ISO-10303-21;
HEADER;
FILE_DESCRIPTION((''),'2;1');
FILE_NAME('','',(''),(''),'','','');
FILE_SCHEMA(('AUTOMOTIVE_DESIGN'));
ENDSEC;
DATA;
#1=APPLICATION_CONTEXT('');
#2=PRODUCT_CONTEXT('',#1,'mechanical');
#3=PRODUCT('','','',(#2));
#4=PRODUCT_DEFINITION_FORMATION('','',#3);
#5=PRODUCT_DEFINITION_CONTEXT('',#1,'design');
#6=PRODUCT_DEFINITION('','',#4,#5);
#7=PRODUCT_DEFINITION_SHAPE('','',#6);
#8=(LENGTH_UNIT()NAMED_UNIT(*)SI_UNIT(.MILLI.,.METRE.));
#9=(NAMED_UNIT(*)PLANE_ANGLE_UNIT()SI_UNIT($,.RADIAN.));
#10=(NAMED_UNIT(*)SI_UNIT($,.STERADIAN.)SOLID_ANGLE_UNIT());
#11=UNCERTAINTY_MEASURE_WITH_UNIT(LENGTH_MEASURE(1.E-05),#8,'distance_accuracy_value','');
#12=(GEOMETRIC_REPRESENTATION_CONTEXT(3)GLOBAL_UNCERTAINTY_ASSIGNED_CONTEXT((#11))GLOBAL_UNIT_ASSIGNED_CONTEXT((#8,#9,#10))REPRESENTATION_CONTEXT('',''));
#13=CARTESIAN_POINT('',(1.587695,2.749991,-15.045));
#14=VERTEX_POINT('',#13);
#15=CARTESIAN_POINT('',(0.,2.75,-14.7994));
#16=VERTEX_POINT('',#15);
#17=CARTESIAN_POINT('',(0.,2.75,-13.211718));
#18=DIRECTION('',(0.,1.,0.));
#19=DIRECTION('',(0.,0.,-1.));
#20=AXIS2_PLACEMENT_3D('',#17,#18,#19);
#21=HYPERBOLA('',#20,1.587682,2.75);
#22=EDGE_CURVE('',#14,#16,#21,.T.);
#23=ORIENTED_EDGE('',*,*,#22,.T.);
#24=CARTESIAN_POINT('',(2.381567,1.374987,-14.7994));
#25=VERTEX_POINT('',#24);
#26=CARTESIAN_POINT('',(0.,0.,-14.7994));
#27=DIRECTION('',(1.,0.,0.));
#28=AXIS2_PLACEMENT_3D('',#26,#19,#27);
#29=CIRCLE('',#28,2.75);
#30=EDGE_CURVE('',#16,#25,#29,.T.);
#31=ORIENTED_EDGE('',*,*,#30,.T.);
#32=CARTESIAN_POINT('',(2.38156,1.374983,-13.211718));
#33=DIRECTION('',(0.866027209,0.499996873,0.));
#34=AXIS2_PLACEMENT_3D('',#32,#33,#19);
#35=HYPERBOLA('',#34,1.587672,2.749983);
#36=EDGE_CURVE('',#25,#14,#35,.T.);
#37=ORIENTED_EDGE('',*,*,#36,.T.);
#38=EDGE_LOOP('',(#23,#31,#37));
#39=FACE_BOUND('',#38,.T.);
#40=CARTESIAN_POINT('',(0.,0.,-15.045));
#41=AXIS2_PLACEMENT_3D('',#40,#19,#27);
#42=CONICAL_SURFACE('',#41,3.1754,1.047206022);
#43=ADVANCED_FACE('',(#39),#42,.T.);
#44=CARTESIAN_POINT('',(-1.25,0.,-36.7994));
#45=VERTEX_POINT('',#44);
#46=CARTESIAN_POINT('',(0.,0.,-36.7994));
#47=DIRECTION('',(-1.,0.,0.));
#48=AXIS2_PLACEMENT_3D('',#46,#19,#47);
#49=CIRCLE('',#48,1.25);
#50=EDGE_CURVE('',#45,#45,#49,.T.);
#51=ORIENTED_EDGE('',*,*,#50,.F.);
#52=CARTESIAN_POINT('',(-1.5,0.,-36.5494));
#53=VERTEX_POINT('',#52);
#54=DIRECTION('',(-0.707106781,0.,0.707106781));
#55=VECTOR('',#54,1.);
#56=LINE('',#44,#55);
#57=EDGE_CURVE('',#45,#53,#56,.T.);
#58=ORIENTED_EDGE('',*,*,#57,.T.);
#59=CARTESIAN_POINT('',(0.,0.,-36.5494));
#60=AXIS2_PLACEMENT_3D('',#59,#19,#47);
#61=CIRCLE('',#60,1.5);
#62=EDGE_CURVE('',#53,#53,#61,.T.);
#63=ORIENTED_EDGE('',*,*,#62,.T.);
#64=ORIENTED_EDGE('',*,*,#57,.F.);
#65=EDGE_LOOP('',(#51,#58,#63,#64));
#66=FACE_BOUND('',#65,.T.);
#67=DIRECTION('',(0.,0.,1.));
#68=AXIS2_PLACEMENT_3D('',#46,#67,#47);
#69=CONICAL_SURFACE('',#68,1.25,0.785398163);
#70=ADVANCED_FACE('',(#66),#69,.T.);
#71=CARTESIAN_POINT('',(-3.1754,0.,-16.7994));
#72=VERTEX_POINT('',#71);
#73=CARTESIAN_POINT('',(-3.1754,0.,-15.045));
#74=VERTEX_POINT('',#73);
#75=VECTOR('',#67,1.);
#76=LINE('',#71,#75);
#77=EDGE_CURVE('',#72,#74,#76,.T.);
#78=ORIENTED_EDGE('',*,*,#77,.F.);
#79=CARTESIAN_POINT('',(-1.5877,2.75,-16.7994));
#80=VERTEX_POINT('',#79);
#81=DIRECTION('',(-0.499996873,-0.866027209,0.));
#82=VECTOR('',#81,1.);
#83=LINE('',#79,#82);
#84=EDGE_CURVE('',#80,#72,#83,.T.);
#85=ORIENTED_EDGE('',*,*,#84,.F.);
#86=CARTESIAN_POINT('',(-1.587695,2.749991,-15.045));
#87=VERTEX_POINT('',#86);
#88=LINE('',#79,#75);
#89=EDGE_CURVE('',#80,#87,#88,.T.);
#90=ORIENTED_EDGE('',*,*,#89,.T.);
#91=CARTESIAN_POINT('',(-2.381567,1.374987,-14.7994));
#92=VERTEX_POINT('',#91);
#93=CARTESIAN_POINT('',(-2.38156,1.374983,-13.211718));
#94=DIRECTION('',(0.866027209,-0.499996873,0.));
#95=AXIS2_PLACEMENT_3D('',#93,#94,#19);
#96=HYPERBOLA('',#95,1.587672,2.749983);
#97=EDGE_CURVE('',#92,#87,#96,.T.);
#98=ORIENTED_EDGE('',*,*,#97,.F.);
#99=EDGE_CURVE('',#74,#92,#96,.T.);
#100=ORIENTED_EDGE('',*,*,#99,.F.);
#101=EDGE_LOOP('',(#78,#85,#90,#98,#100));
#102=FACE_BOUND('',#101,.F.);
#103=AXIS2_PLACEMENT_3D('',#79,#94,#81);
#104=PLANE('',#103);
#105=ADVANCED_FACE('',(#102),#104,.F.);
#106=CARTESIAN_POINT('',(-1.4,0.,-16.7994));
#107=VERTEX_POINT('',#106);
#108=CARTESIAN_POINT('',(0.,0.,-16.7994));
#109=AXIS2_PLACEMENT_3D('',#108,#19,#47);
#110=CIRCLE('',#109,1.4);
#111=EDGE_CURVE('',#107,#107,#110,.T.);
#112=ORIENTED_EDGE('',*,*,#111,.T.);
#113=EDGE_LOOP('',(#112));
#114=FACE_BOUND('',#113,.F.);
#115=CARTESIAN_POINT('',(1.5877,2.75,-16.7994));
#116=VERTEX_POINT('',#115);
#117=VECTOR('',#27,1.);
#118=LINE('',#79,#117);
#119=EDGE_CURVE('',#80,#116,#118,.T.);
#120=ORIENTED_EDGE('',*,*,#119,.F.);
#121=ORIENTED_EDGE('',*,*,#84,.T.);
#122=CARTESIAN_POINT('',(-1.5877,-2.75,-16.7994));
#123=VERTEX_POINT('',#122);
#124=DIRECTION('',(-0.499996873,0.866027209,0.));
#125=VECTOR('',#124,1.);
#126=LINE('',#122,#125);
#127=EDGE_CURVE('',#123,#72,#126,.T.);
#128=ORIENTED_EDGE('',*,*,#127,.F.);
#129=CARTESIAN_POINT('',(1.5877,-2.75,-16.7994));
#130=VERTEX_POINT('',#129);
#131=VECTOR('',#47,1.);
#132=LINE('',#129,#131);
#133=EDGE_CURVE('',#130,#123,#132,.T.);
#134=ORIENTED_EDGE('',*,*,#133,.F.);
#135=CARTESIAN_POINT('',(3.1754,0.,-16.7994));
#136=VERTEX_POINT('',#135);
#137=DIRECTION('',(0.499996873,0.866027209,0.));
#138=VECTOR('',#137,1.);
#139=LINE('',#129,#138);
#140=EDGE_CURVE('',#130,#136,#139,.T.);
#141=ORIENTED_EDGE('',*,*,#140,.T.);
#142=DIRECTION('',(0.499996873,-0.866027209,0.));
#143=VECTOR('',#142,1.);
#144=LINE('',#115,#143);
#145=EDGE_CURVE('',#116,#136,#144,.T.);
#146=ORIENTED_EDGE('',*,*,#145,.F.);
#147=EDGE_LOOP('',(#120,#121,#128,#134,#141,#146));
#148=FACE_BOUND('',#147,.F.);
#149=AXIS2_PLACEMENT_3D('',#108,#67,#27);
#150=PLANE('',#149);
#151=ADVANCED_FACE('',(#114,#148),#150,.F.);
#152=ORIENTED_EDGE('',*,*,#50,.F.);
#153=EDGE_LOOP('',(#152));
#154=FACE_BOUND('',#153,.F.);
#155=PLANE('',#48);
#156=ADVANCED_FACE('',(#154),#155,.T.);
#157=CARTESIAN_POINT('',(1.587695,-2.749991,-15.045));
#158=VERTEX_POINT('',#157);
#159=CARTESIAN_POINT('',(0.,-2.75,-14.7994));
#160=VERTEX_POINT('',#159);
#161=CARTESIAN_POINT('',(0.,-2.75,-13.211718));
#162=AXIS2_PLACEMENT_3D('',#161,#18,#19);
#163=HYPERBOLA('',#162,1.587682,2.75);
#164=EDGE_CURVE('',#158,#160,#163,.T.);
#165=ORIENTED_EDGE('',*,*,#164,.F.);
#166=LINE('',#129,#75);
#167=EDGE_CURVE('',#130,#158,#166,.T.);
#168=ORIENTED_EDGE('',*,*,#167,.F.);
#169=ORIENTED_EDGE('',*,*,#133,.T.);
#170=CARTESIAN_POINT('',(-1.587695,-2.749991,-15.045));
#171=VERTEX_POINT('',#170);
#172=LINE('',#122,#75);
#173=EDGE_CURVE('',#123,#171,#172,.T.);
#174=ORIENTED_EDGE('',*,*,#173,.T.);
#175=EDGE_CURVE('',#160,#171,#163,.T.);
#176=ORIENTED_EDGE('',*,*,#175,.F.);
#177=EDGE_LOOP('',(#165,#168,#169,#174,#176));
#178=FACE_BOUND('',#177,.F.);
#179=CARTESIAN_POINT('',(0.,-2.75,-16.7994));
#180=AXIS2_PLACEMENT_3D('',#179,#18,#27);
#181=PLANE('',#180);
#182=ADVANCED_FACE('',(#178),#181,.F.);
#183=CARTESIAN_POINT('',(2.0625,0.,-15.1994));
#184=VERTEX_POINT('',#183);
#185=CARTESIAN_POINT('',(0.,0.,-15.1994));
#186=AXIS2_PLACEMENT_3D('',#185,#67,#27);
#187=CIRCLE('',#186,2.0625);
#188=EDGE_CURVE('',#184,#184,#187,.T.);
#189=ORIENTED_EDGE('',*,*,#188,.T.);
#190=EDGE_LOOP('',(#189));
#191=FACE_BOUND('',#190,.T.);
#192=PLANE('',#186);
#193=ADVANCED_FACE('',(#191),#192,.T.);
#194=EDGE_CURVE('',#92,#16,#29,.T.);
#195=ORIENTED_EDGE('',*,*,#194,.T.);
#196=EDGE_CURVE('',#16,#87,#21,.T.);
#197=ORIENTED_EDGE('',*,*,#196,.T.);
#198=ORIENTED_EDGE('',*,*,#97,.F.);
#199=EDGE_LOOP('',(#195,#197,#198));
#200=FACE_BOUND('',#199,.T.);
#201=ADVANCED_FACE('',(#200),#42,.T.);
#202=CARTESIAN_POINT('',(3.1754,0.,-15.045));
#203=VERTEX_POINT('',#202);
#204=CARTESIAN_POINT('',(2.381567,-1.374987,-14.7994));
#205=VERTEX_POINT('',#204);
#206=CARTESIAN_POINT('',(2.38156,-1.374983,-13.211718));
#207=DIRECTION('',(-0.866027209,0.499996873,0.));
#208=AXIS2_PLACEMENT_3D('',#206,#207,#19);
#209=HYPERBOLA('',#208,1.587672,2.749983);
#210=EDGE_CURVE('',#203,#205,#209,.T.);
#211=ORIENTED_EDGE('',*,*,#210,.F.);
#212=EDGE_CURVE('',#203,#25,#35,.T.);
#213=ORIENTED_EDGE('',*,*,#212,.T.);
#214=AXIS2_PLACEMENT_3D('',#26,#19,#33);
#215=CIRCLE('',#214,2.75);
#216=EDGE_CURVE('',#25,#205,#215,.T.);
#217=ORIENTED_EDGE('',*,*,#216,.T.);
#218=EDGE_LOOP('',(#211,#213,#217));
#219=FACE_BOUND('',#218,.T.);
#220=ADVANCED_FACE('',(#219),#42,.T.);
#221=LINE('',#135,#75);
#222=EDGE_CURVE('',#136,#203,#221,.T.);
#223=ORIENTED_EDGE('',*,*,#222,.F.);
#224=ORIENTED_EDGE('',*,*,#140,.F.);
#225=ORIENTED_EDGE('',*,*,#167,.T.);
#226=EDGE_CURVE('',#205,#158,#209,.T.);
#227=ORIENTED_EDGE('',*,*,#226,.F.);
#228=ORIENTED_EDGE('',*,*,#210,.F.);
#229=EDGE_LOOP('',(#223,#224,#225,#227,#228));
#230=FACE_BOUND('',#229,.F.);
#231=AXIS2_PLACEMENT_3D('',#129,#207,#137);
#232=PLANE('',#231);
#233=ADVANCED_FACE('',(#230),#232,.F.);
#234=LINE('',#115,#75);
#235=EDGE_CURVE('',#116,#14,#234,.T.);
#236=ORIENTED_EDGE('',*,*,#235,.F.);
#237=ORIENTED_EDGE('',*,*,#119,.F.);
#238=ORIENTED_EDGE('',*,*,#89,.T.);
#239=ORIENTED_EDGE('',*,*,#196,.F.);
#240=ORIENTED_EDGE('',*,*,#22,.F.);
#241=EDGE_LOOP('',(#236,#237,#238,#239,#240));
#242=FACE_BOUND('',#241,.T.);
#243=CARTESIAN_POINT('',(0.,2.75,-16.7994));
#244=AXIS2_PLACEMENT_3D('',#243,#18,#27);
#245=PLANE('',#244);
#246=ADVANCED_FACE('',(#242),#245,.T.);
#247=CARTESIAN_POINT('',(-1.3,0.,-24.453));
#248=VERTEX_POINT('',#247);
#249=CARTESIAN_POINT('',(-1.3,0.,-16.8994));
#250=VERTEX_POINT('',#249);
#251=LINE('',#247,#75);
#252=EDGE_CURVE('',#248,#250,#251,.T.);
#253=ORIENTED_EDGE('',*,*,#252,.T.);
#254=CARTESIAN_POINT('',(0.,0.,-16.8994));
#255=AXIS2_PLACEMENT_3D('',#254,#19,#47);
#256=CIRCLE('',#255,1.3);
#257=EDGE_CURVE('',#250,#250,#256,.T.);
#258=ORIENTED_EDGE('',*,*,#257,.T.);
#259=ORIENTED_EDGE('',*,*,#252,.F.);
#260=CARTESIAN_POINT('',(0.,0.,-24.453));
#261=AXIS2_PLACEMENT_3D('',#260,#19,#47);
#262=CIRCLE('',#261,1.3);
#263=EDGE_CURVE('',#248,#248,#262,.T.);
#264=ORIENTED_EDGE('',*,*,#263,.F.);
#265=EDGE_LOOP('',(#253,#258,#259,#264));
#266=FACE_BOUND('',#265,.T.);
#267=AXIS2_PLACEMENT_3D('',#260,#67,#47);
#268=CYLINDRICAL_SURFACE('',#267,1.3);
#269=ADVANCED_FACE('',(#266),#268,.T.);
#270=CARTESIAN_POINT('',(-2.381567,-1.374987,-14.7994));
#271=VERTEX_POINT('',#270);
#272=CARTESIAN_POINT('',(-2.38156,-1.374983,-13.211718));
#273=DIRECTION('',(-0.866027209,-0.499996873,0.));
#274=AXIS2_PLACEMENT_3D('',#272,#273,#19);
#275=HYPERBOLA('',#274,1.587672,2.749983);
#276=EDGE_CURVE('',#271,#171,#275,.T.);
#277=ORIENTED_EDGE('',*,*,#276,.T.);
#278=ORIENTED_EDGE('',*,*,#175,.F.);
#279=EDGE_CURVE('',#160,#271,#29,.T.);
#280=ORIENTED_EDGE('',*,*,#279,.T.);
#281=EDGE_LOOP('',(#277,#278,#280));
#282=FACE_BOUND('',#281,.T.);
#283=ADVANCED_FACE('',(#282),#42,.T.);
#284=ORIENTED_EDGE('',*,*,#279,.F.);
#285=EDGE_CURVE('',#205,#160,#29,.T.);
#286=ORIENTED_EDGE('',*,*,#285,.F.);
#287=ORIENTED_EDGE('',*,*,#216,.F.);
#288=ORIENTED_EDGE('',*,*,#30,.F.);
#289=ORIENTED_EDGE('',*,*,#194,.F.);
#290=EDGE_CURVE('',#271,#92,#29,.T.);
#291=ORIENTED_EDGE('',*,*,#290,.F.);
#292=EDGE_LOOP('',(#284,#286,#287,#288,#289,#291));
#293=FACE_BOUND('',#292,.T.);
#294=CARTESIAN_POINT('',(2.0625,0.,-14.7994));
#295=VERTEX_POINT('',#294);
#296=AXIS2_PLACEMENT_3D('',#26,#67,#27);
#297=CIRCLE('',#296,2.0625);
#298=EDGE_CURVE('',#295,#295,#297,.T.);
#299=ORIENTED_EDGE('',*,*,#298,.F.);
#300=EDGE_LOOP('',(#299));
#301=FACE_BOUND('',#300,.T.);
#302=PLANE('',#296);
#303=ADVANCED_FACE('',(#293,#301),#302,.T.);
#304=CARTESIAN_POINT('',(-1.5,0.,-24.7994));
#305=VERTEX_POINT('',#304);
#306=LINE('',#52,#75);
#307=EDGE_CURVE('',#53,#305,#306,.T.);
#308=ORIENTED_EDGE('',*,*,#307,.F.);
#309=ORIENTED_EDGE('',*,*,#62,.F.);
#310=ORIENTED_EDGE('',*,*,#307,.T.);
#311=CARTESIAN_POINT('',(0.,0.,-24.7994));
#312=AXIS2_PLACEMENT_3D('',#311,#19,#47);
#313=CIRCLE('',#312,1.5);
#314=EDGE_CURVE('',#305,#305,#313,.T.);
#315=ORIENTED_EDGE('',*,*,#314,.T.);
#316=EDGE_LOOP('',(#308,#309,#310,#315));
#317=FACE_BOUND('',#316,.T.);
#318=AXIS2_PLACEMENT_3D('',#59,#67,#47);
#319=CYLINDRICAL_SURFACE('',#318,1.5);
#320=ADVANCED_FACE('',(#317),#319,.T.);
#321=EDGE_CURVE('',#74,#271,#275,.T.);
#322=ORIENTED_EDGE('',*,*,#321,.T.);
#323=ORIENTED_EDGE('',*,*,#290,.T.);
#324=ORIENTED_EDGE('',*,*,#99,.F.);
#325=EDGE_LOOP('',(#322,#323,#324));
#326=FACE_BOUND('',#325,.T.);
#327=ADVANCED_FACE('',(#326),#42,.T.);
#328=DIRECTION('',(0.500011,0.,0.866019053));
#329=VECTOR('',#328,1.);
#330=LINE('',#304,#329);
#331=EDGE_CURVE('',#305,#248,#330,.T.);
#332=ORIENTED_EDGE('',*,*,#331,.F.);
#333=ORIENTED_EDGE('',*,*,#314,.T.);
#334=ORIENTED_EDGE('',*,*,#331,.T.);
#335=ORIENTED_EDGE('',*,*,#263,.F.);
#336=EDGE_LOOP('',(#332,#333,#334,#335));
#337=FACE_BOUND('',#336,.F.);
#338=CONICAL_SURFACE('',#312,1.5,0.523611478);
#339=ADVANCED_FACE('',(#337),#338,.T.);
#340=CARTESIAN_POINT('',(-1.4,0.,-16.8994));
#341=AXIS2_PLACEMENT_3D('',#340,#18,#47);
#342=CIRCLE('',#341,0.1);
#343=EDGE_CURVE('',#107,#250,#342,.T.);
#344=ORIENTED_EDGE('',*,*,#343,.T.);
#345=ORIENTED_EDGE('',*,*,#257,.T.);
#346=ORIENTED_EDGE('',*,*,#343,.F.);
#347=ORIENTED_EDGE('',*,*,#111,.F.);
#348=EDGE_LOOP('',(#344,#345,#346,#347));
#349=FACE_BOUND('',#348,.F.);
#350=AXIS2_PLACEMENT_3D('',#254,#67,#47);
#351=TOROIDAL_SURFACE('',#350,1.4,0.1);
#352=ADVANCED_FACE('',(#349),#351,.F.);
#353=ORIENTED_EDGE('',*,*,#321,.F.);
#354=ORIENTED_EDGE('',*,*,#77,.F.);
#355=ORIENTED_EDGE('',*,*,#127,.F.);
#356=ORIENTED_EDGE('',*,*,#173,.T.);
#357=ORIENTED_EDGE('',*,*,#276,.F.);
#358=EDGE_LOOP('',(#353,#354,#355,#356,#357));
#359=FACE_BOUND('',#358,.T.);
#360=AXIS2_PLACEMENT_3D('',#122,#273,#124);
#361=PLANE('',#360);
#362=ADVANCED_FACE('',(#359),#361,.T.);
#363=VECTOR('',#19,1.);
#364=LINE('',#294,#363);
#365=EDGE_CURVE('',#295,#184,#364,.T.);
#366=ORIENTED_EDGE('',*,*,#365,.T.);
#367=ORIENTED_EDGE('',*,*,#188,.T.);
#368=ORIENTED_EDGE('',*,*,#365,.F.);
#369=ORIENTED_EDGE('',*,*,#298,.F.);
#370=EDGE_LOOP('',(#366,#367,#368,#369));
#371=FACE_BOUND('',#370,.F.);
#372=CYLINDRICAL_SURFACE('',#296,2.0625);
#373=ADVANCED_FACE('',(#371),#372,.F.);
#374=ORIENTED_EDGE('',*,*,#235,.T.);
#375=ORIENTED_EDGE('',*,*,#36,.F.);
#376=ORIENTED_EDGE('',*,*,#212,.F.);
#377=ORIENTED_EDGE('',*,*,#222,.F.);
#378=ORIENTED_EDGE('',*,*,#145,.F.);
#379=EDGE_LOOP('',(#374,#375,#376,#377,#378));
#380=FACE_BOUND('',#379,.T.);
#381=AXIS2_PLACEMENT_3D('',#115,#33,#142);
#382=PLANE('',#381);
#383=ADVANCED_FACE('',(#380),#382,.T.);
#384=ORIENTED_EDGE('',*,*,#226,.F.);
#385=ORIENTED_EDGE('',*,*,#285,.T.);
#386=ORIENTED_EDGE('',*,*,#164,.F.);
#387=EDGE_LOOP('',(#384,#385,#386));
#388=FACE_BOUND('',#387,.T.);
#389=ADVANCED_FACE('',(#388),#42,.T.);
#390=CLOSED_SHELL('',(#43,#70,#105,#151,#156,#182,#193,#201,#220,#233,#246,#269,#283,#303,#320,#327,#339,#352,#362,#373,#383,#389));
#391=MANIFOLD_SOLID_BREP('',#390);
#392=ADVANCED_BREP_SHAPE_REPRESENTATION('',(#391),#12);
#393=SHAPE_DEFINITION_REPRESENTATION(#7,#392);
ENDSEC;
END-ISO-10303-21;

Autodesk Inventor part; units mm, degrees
ref_plane "YZ Plane" through (0, 0, 0) normal (1, 0, 0) x (0, 1, 0)
sketch "Skizze2" plane through (0, 0, 0) normal (0, 1, 0) x (-1, 0, 0)
  line L0 (0, -16.7994) -> (0, -36.7994)
  line L1 (0, -36.7994) -> (1.25, -36.7994)
  line L2 (1.5, -36.5494) -> (1.5, -24.7994)
  line L3 (1.5, -24.7994) -> (1.3, -24.453)
  line L4 (1.3, -24.453) -> (1.3, -16.7994)
  line L5 (1.3, -16.7994) -> (0, -16.7994)
  line L6 (1.25, -36.7994) -> (1.5, -36.5494)
  line L7 (1.5, -36.7994) -> (1.5, -37.153)
  line L8 (0, -41.2237) -> (0, -12.7287) projected
  dimension "Ds" = 2.6
  dimension "NND" = 3
  dimension "b" = 12
  dimension "d3" = 30
  dimension "d5" = 45
  dimension "PTC" = 0.5
  dimension "NLG" = 20
revolve "Drehung1" add sketch "Skizze2" angle 360 about axis through (0, 0, -16.7994) along (0, 0, -1)
sketch "Skizze3" plane through (0, 0, -16.7994) normal (0, 0, 1) x (1, 0, 0)
  circle A0 centre (0, 0) radius 1.3 projected
  line L0 (0, 2.75) -> (1.5877, 2.75)
  line L1 (1.5877, 2.75) -> (3.1754, 0)
  line L2 (3.1754, 0) -> (0, 0)
  line L3 (0, 0) -> (0, 2.75)
  line L4 (0, 2.75) -> (-1.5877, 2.75)
  line L5 (-1.5877, 2.75) -> (-3.1754, 0)
  line L6 (0, -2.75) -> (1.5877, -2.75)
  line L7 (1.5877, -2.75) -> (3.1754, 0)
  line L8 (-1.5877, -2.75) -> (-3.1754, 0)
  line L9 (0, -2.75) -> (-1.5877, -2.75)
  dimension "d9" = 60
  dimension "ParS" = 5.5
  dimension "msp_d11" = 5.5
extrude "Extrusion1" add sketch "Skizze3" along normal blind 2
sketch "Skizze4" plane through (0, 0, 0) normal (0, 1, 0) x (-1, 0, 0)
  line L0 (-2.75, -14.7994) -> (-3.1754, -14.7994)
  line L1 (-3.1754, -14.7994) -> (-3.1754, -15.045)
  line L2 (-3.1754, -15.045) -> (-2.75, -14.7994)
  line L3 (0, -25.6442) -> (0, 36.2691) projected
  line L4 (0, 27.4244) -> (0, 27.1787)
  line L5 (-3.1754, -16.7994) -> (-3.1754, -14.7994) projected
  line L6 (-1.5877, -14.7994) -> (-3.1754, -14.7994) projected
  dimension "d14" = 30
  dimension "msp_d15" = 5.5
revolve "Drehung2" cut sketch "Skizze4" angle 360 about axis through (0, 0, 27.4244) along (0, 0, -1)
sketch "Sketch5" plane through (0, 0, -14.7994) normal (0, 0, 1) x (1, 0, 0)
  arc A0 (2.3816, 1.375) -> (0, 2.75) centre (0, 0) ccw projected
  circle A1 centre (0, 0) radius 2.0625
  dimension "d27" = 4.125
extrude "Extrusion2" cut sketch "Sketch5" against normal blind 0.4
thread "Gewinde1" size "M3x0.5" class "6g" standard "ISO Metric profile" full length
ref_plane "MSC_PF1" through (0, 0, 0) normal (0, 1, 0) x (-1, 0, 0)
ref_plane "MSC_PT1" through (0, 0, -16.7994) normal (0, 0, -1) x (-1, 0, 0)
fillet "Fillet1" radius 0.1 1 edges at (1.3, 0, -16.7994)
equation "\"msp_d11\" = ParS"
equation "\"d27\" = 0.75 * ParS"
equation "\"d28\" = 0.2 * ParK"
equation "\"d30\" = r"
equation "\"msp_d17\" = b"
equation "\"msp_d15\" = ParS"
equation "\"r\" = 0.1"
equation "\"THREADDIA\" = NND"
equation "\"ParK\" = 2"
properties part number "DIN EN ISO 4015 - M3x20" material "Edelstahl, 440C"
